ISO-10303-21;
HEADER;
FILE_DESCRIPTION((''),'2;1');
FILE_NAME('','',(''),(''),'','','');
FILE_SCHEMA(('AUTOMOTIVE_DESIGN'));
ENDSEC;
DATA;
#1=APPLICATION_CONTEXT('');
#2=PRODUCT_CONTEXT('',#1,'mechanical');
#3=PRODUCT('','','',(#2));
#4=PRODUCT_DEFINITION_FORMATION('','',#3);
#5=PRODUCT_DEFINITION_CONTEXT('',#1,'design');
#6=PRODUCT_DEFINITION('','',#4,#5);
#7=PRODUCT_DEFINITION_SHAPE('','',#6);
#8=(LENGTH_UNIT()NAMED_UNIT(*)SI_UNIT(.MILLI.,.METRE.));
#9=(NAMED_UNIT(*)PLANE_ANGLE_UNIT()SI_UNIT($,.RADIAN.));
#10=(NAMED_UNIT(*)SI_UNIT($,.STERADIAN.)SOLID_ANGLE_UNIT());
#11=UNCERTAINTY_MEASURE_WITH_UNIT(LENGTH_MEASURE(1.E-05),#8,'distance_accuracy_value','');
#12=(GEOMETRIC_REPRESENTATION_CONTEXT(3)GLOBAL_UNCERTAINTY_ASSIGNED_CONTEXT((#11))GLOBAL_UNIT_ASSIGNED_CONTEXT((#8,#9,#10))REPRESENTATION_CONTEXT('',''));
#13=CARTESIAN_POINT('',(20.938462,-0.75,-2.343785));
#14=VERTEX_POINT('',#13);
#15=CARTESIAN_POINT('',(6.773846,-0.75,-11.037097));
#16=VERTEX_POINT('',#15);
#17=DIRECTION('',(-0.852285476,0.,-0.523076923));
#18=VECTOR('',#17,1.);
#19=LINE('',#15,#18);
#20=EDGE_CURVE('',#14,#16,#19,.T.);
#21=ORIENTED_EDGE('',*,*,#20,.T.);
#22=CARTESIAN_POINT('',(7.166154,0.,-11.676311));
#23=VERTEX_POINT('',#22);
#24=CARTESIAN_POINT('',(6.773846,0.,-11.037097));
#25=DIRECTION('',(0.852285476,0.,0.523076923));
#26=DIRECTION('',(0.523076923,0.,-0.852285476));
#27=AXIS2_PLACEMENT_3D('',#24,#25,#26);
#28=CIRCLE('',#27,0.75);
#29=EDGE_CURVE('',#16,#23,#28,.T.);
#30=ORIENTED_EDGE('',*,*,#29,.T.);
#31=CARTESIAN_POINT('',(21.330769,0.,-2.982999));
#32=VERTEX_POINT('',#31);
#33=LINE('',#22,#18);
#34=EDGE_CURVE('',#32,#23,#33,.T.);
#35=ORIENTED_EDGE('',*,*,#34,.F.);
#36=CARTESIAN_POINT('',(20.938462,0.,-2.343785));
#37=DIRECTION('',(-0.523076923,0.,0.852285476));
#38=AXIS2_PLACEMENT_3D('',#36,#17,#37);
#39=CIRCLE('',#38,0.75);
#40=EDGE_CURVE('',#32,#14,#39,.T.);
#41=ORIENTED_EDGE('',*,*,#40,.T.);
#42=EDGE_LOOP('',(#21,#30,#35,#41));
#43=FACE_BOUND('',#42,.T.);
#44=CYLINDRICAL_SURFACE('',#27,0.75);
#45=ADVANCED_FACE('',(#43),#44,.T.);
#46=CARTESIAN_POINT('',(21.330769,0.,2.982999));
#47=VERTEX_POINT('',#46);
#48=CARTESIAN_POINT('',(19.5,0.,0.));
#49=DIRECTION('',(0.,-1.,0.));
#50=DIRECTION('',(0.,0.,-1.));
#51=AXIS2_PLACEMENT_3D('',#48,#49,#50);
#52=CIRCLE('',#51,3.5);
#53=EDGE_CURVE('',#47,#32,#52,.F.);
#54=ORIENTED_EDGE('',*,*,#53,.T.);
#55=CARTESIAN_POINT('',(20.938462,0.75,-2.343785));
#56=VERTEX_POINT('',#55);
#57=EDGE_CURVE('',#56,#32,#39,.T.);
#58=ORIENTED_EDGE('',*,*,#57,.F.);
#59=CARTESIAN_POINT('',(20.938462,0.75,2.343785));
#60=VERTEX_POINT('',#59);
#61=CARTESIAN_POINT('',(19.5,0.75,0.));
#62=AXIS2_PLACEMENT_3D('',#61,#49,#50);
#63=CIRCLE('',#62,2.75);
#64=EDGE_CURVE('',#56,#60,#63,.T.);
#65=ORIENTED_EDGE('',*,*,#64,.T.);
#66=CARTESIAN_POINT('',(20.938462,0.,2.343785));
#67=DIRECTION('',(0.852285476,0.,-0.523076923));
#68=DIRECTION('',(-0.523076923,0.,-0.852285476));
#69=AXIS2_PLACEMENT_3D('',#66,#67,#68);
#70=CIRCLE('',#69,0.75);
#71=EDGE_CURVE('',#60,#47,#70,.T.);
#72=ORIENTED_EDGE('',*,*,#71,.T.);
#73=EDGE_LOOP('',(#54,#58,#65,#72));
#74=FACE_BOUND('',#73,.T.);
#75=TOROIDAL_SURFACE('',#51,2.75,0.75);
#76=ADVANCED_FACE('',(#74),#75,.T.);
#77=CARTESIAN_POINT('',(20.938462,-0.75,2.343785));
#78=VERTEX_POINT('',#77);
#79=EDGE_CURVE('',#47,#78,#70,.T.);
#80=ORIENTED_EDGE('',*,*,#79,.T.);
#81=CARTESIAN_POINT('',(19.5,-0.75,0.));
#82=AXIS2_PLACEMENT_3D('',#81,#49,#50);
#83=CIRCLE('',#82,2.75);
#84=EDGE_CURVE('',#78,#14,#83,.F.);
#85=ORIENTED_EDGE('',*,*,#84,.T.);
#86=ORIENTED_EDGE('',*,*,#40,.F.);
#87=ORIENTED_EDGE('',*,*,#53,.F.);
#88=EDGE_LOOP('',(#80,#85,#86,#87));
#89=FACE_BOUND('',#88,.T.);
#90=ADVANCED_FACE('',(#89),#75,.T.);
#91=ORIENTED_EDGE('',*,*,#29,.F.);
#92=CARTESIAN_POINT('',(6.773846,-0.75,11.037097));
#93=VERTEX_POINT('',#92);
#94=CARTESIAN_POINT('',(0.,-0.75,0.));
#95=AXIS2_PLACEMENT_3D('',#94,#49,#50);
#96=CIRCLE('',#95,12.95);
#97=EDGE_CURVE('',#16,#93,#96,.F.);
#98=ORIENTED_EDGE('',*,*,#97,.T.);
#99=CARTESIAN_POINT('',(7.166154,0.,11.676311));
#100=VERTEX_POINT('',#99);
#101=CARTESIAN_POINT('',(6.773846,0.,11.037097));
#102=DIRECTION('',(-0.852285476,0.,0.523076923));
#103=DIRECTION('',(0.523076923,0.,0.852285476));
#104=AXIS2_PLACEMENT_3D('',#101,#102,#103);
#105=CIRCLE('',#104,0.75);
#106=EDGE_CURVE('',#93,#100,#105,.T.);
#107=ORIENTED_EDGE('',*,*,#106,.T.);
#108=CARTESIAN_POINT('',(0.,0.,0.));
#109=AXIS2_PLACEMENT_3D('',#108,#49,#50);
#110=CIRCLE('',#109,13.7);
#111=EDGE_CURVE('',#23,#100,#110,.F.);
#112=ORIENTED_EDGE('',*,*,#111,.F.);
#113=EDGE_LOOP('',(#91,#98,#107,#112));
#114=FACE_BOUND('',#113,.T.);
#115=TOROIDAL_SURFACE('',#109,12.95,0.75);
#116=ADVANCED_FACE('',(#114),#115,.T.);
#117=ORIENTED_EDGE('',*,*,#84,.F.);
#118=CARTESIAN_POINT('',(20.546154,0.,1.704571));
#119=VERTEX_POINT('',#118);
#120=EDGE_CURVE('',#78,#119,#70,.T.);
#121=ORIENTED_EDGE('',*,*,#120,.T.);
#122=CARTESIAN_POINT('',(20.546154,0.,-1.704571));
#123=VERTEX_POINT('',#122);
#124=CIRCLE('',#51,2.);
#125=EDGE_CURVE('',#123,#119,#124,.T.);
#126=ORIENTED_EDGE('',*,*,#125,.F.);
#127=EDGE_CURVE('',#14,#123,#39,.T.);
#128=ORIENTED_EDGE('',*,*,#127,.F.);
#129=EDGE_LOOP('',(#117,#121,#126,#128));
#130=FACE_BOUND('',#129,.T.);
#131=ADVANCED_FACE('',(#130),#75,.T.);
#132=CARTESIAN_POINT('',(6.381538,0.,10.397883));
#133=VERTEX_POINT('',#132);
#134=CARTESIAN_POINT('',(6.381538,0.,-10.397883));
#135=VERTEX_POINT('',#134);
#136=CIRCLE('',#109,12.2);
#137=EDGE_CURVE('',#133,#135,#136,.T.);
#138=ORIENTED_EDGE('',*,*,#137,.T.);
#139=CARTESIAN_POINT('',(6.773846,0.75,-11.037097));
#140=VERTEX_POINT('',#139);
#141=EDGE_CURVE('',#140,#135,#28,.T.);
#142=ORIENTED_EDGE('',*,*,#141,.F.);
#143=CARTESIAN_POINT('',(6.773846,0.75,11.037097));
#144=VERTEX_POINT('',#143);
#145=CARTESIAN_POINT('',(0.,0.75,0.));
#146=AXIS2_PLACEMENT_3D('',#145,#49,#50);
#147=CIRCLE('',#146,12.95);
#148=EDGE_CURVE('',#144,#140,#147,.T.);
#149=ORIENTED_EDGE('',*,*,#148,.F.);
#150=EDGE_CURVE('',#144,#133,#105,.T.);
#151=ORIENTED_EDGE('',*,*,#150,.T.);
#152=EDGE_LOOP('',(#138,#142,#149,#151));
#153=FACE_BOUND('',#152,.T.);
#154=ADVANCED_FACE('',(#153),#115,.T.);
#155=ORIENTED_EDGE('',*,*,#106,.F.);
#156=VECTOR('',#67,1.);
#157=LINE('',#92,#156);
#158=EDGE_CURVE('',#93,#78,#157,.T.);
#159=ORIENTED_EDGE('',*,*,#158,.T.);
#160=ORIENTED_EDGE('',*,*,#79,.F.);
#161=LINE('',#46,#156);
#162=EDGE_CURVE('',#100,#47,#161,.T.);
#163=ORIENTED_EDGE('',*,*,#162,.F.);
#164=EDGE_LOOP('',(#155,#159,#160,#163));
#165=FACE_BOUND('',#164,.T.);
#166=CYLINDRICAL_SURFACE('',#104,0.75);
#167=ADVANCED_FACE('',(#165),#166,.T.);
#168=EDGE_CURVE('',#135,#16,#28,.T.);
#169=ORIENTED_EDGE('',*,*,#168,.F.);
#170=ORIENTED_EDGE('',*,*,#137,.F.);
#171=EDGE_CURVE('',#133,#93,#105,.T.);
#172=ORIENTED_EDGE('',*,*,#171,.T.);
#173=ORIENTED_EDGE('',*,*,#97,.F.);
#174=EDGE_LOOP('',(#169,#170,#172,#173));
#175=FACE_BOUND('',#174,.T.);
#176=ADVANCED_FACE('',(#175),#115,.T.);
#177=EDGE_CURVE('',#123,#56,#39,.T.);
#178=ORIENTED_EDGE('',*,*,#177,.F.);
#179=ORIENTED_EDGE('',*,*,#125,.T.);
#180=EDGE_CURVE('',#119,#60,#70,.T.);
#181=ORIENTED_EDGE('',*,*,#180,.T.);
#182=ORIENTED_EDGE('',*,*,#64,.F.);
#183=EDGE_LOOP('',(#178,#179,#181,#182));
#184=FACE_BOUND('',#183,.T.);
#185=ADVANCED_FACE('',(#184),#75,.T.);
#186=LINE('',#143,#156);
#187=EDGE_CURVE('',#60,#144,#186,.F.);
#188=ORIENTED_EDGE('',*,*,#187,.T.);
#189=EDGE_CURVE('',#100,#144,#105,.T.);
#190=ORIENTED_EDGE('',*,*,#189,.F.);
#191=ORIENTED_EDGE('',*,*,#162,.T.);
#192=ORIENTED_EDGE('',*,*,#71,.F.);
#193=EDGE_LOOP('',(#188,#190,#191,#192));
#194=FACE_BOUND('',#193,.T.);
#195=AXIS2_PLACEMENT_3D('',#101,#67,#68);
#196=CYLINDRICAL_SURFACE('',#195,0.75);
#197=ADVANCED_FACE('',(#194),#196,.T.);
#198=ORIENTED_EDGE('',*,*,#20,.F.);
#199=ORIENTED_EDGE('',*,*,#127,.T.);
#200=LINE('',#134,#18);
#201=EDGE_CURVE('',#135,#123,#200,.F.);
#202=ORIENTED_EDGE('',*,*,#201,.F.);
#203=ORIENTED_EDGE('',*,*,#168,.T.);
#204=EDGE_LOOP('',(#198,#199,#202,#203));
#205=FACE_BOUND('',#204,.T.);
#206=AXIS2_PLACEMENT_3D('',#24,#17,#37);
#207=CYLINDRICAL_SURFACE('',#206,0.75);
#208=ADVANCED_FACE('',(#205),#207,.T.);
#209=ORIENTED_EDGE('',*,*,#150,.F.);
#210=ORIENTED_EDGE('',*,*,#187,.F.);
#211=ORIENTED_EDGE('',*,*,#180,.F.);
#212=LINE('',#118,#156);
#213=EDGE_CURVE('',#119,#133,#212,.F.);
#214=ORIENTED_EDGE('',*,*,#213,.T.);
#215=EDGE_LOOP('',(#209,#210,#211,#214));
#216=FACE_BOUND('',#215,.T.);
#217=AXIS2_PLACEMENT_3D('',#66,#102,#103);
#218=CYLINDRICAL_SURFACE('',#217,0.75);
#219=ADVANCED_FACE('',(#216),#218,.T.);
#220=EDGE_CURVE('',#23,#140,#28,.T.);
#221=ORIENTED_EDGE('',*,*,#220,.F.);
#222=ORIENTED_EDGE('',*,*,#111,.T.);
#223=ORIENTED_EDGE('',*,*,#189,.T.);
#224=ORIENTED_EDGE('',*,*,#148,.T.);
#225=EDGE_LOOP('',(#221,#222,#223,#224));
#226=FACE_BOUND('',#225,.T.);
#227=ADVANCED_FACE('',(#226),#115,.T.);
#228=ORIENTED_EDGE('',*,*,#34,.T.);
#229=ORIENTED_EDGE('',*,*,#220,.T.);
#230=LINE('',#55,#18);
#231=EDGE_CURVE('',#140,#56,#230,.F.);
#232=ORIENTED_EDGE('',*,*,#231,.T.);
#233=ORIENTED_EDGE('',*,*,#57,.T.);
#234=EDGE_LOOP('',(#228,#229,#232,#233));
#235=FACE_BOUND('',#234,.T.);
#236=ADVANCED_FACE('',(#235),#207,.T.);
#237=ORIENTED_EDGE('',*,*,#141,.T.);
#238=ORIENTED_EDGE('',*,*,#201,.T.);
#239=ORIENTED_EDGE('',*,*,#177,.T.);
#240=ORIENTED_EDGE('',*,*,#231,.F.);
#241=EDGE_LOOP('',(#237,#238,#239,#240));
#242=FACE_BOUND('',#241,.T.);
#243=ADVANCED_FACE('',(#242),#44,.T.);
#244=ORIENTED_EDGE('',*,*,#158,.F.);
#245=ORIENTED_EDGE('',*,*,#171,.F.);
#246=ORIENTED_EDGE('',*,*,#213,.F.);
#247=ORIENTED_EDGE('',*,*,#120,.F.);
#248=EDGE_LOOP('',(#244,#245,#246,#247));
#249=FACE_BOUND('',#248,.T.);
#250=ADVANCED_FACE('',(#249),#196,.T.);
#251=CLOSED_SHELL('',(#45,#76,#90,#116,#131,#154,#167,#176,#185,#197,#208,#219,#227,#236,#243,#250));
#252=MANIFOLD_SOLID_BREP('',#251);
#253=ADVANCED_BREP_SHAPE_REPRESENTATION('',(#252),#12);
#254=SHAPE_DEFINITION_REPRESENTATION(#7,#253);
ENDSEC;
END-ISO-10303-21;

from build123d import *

# Parameters (mm, degrees)
EXTRUDE_THIN1_DEPTH = 0.75
FILLET1_R           = 0.75


with BuildPart() as part:
    # Sketch1 → Extrude-Thin1 (new, symmetric)
    with BuildSketch(Plane(origin=(0, 0, 0), x_dir=(1, 0, 0), z_dir=(0, 1, 0))):
        with BuildLine():
            Line((7.166153846, 11.676311021), (21.330769231, 2.982999166))
            ThreePointArc((21.330769231, 2.982999166), (23, 0), (21.330769231, -2.982999166))
            Line((21.330769231, -2.982999166), (7.166153846, -11.676311021))
            ThreePointArc((7.166153846, -11.676311021), (-13.7, 0), (7.166153846, 11.676311021))
        make_face()
        with BuildLine():
            Line((6.381538462, 10.397882807), (20.546153846, 1.704570952))
            ThreePointArc((20.546153846, 1.704570952), (21.5, 0), (20.546153846, -1.704570952))
            Line((20.546153846, -1.704570952), (6.381538462, -10.397882807))
            ThreePointArc((6.381538462, -10.397882807), (-12.2, 0), (6.381538462, 10.397882807))
        make_face(mode=Mode.SUBTRACT)
    extrude(amount=EXTRUDE_THIN1_DEPTH, both=True)

    # Fillet1
    fillet1_edges = [part.edges().sort_by_distance(p)[0] for p in [
        (14.248461538, 0.75, -7.329655093),
        (23, 0.75, 0),
        (14.248461538, 0.75, 7.329655093),
        (14.248461538, -0.75, -7.329655093),
        (23, -0.75, 0),
        (14.248461538, -0.75, 7.329655093),
        (13.463846154, 0.75, -6.051226879),
        (21.5, 0.75, 0),
        (13.463846154, 0.75, 6.051226879),
        (13.463846154, -0.75, -6.051226879),
        (21.5, -0.75, 0),
        (13.463846154, -0.75, 6.051226879),
        (-13.7, 0.75, 0),
        (-13.7, -0.75, 0),
        (-12.2, 0.75, 0),
        (-12.2, -0.75, 0),
    ]]
    fillet(fillet1_edges, radius=FILLET1_R - 0.0001)  # a hair under: the kernel refuses the full size


solid = part.part
